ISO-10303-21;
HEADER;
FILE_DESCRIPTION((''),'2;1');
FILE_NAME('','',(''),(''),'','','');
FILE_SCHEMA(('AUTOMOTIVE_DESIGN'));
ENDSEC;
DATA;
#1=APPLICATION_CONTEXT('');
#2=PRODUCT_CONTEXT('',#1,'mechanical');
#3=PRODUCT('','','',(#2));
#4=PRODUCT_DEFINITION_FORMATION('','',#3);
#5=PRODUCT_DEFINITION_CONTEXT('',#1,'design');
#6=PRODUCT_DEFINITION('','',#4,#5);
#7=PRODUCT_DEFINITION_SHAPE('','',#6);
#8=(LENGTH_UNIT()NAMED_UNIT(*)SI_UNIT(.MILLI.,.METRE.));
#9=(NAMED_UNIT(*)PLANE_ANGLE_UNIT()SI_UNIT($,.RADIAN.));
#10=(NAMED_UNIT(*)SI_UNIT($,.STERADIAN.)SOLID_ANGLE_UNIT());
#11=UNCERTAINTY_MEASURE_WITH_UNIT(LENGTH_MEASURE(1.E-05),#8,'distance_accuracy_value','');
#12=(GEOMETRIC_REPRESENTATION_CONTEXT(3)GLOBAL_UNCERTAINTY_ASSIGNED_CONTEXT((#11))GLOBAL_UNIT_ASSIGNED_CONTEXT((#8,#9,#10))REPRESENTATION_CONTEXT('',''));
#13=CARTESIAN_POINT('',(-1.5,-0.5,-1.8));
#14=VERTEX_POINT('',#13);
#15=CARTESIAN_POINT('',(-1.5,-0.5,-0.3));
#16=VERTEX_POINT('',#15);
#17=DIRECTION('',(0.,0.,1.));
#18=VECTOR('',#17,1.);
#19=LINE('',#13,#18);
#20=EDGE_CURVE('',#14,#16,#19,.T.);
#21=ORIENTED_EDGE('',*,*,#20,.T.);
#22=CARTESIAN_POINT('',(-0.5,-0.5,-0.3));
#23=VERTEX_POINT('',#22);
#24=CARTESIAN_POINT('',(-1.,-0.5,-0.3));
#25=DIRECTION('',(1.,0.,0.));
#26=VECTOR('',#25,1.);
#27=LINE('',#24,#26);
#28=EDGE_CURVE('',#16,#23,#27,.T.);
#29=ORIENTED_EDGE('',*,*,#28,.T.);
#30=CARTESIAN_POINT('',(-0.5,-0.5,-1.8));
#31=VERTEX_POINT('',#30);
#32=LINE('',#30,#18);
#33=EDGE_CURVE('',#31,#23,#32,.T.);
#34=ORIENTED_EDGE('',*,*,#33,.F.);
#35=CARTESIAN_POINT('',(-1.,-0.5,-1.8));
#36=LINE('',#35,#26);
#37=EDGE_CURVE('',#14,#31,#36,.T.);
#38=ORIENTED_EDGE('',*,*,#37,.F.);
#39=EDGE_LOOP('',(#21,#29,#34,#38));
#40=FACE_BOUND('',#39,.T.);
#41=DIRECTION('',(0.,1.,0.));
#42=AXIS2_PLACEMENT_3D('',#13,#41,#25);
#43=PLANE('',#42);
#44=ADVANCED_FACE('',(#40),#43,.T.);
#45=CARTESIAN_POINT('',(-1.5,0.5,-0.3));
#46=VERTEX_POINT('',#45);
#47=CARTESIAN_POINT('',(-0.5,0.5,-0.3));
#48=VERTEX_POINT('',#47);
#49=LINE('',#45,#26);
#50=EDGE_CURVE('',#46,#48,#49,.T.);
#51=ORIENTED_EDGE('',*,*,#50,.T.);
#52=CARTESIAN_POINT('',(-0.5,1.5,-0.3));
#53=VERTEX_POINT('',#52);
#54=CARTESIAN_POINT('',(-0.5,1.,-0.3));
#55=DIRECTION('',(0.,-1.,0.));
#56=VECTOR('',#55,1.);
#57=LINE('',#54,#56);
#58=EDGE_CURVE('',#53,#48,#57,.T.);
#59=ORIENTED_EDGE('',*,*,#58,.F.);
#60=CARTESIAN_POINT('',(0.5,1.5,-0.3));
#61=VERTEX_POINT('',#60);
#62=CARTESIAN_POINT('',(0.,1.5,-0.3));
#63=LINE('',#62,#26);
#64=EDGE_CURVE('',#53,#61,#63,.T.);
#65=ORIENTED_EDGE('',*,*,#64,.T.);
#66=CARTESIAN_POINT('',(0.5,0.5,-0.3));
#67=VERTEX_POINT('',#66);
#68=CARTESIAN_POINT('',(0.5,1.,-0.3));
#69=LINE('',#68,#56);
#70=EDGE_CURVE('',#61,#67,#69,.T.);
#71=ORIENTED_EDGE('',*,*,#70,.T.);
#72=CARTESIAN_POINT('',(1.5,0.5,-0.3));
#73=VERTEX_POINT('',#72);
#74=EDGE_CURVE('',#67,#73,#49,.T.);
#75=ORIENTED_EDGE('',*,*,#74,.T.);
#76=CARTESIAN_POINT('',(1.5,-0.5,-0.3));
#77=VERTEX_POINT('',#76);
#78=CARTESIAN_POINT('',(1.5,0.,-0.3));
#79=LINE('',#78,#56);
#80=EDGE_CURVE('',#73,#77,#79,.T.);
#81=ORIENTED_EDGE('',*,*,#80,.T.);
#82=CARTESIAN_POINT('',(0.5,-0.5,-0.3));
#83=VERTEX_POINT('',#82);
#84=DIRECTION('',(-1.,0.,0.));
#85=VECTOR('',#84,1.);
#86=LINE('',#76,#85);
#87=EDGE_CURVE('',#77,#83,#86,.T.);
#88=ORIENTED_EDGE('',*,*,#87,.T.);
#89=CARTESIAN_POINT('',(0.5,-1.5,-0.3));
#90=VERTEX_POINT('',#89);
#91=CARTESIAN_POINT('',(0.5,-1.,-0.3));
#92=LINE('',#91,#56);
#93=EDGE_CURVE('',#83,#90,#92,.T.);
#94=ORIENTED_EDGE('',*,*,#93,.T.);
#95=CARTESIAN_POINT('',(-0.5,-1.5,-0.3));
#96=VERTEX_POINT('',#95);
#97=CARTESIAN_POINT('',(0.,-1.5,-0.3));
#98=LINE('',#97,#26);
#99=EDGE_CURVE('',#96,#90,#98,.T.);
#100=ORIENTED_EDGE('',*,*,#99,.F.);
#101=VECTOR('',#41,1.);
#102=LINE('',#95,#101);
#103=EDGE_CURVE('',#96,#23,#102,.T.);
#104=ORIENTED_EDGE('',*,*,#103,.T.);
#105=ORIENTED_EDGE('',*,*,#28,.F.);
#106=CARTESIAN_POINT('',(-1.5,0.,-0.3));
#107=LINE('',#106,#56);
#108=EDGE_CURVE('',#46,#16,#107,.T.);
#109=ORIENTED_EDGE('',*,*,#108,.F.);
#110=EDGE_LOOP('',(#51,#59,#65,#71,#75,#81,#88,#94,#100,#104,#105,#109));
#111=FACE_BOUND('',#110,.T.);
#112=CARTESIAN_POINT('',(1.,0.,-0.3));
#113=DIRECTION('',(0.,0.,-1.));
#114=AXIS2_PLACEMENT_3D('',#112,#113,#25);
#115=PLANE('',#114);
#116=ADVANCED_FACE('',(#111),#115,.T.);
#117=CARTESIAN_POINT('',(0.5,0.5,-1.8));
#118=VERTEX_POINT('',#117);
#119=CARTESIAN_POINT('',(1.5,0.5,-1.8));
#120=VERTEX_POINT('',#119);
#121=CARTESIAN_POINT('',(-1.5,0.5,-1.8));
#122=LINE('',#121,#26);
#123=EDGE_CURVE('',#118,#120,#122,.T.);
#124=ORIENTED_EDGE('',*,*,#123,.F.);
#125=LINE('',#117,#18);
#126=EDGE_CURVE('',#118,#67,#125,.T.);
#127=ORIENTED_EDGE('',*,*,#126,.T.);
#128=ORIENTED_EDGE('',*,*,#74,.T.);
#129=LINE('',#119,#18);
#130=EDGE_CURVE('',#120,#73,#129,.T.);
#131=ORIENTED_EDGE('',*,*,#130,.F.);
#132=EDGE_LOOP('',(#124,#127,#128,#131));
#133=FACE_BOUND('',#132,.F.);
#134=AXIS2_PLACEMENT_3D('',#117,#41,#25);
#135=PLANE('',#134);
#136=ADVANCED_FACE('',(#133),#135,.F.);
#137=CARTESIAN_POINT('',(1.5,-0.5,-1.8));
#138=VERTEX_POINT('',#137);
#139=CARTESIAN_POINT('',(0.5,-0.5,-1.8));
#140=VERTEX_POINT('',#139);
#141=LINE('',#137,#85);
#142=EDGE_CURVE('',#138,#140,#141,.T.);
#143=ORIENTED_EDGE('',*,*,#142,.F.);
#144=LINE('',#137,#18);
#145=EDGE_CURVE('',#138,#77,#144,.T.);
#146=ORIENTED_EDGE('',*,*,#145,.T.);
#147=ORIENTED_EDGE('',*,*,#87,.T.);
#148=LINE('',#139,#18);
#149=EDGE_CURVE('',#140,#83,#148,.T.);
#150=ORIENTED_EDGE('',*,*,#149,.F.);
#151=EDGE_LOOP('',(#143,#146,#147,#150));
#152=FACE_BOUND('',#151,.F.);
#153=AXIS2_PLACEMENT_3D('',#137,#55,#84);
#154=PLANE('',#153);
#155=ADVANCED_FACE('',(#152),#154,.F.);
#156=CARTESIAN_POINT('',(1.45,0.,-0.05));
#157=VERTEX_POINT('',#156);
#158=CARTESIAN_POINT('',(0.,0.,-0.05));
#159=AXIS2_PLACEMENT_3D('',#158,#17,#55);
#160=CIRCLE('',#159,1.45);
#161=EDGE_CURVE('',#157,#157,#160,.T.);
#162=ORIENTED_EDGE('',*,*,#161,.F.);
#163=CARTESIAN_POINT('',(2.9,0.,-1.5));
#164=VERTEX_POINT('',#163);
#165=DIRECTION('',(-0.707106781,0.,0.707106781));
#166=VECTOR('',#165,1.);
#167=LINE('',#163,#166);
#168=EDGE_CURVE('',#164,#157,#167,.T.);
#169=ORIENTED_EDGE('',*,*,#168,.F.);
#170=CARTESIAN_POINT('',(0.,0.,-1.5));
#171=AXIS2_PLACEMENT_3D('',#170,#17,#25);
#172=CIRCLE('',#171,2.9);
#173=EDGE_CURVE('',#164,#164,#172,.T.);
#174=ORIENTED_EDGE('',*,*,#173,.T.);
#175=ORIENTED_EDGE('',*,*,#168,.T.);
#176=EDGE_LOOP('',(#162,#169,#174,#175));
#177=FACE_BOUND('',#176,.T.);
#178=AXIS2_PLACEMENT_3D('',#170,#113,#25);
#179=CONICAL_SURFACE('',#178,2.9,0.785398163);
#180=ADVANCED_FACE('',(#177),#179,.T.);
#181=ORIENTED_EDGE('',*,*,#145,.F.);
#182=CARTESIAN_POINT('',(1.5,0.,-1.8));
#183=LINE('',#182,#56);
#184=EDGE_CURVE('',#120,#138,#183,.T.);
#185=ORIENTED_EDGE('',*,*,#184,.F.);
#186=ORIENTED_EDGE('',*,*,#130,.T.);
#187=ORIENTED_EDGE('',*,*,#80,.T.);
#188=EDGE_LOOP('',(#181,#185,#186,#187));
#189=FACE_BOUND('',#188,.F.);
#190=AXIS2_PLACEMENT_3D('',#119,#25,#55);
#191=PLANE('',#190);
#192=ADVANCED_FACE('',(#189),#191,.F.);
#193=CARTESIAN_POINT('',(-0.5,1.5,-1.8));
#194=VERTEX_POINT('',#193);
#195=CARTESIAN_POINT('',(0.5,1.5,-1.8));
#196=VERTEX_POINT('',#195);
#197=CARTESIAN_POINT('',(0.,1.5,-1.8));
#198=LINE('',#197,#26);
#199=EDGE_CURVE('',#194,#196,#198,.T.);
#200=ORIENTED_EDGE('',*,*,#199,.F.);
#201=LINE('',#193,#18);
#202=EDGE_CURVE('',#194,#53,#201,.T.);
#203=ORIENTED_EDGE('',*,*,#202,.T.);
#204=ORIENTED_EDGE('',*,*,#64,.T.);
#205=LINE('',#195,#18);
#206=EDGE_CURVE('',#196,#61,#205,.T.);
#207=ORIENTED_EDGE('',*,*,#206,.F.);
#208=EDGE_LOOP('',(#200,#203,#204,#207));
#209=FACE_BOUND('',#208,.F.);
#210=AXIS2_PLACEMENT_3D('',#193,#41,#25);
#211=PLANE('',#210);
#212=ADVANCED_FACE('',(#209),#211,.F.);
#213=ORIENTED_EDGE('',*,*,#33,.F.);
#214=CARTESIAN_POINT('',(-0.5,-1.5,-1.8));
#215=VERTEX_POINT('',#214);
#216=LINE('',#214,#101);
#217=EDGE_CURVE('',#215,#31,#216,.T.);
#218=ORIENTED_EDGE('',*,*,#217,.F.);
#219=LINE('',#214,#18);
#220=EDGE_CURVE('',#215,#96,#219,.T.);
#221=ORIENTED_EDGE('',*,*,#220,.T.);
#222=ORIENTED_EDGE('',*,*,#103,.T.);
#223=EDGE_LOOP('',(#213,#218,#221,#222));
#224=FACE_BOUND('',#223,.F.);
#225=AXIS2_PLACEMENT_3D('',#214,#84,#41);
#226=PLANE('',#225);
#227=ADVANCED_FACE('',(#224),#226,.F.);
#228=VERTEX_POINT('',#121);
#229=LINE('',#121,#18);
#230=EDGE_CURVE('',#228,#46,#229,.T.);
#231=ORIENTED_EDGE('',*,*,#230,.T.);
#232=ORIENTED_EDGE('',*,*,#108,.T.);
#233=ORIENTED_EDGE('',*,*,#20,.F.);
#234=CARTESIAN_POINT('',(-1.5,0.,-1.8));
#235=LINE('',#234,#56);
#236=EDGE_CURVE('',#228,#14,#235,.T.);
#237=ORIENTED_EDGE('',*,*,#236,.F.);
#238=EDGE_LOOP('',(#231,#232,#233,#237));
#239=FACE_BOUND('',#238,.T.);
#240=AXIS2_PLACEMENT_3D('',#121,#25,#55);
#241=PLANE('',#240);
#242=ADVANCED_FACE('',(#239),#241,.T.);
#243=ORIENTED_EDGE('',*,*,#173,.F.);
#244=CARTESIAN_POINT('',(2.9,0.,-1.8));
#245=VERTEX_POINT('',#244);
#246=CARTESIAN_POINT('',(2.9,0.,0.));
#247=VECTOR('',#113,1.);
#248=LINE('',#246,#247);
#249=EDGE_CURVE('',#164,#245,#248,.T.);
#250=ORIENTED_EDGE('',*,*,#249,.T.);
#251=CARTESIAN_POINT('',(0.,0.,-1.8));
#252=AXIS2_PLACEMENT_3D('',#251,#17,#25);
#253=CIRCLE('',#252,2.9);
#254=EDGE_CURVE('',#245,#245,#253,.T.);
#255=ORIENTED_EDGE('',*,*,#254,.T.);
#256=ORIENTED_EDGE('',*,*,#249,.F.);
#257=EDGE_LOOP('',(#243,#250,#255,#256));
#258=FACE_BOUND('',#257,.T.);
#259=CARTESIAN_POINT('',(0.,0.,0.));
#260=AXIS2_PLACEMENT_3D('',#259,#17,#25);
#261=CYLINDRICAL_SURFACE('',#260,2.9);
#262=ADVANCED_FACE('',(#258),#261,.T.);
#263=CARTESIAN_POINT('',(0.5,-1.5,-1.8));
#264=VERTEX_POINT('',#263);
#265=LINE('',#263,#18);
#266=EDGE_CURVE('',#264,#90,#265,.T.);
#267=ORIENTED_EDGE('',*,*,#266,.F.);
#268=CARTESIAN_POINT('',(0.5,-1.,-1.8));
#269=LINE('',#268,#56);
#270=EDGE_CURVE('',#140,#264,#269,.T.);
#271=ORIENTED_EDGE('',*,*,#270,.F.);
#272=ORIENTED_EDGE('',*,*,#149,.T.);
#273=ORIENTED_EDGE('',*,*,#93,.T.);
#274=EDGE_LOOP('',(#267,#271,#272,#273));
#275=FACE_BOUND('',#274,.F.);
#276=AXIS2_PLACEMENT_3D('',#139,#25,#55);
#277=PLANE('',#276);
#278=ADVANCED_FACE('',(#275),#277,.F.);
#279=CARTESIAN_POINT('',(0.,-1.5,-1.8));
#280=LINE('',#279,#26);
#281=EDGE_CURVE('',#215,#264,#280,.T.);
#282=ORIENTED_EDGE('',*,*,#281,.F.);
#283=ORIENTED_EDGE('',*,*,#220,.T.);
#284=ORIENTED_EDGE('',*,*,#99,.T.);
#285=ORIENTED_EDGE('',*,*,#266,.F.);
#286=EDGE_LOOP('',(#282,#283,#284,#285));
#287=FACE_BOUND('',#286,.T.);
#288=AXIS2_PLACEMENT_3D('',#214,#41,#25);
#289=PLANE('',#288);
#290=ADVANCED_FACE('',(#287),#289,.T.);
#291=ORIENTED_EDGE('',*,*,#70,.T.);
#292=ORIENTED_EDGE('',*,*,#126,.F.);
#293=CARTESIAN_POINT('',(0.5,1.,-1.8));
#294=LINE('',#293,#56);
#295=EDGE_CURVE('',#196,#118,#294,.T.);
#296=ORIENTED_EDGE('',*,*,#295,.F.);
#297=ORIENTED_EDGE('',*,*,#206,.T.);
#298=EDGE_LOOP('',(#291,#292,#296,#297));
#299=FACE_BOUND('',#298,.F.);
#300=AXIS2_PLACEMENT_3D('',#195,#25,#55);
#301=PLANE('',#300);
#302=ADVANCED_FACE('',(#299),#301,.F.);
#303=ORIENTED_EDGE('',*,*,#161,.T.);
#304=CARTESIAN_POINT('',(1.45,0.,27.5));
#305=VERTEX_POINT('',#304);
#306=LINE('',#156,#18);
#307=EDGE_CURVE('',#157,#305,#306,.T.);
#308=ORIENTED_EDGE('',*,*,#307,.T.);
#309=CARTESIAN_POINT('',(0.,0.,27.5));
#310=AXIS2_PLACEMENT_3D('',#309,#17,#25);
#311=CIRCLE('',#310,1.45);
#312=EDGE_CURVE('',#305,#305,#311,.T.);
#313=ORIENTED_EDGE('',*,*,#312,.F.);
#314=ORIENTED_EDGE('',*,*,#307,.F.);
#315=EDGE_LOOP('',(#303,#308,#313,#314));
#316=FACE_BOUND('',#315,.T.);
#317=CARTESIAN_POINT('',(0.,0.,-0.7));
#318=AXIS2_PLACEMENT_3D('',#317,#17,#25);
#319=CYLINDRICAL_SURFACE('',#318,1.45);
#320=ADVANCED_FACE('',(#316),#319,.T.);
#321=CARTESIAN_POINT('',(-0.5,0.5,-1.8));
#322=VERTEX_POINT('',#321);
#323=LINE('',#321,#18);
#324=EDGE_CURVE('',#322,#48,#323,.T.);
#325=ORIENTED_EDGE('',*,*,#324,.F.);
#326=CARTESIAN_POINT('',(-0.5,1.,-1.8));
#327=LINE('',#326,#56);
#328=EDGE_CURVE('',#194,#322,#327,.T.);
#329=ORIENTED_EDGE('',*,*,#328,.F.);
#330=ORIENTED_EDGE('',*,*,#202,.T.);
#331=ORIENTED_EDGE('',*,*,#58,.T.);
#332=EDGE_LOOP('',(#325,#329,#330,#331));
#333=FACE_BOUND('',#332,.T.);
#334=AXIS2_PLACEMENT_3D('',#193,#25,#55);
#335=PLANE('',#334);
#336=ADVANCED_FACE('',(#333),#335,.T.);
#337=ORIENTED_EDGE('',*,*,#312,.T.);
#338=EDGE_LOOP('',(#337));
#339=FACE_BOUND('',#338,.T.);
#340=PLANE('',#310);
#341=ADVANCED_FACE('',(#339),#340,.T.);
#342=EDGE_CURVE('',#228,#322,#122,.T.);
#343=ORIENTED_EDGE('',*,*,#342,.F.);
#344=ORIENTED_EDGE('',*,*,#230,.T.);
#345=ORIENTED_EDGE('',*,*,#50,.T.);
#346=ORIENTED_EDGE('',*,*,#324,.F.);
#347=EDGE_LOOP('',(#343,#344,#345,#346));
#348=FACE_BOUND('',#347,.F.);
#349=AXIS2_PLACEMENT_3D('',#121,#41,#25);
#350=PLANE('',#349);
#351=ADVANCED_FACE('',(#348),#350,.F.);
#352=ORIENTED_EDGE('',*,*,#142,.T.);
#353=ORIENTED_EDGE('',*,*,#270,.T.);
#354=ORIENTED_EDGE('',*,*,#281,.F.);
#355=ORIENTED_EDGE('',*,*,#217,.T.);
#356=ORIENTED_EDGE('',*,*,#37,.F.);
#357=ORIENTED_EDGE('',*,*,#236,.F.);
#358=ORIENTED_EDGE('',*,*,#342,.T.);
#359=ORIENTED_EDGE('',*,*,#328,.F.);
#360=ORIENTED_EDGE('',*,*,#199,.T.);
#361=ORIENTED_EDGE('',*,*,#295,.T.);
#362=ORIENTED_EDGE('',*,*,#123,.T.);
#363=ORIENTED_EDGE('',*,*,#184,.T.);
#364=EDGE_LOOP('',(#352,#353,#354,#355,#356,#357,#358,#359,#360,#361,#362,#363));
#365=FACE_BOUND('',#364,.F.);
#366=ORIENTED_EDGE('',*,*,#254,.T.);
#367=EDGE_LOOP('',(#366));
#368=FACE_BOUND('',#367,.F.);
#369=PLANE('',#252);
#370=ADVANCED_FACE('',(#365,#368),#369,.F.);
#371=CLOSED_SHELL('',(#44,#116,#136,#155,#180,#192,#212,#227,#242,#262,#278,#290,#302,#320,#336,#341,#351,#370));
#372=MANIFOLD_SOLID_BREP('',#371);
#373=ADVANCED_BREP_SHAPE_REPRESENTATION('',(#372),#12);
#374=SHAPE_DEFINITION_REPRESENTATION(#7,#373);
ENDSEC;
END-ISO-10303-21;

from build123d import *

# Parameters (mm, degrees)
F0_R        = 1.45
F1_DEPTH    = 27.5
F2_R        = 2.9
F3_DEPTH    = 1.8
F4_W        = 1
F4_H        = 1
F5_DEPTH    = 1.5
F6_S5_R     = 1.45
F6_T6_DEPTH = 6


# Not quite as in the source:
# - a fillet or chamfer that OpenCascade refuses, or shapes differently, is made with other operations: its cross-section is extruded or revolved along the edge and cut away or added


with BuildPart() as f1:
    # F0 (on Top) → F1 (new body)
    with BuildSketch(Plane.XY):
        Circle(F0_R)
    extrude(amount=F1_DEPTH)

    # F2 (on Top) → F3 (join)
    with BuildSketch(Plane.XY):
        Circle(F2_R)
    extrude(amount=-F3_DEPTH)

    # F4 (on face) → F5 (cut)
    with BuildSketch(Plane(origin=(0, 0, -1.8), x_dir=(1, 0, 0), z_dir=(0, 0, -1))):
        with Locations((1, 0)):
            Rectangle(F4_W, F4_H)
        Rectangle(F4_W, F4_H)
        with Locations((0, 1)):
            Rectangle(F4_W, F4_H)
        with Locations((-1, 0)):
            Rectangle(F4_W, F4_H)
        with Locations((0, -1)):
            Rectangle(F4_W, F4_H)
    extrude(amount=-F5_DEPTH, mode=Mode.SUBTRACT)

    # F6: chamfer of 1.5 on 1 edges, made by hand


with BuildPart() as f6_tool2:
    # F6_s3 → F6_t4 (revolve)
    with BuildSketch(Plane.XZ):
        Polygon((2.9, -1.5), (1.4, 0), (2.9, 0), align=None)
    revolve(axis=Axis((0, 0, 0), (0, 0, 1)))

    # F6_s5 → F6_t6 (cut, symmetric)
    with BuildSketch(Plane.XY.offset(-0.7)):
        Circle(F6_S5_R)
    extrude(amount=F6_T6_DEPTH, both=True, mode=Mode.SUBTRACT)


with BuildPart() as f1_1:
    add(f1.part)

    # F6_t1: cut F6_tool2
    add(f6_tool2.part, mode=Mode.SUBTRACT)


solid = f1_1.part
